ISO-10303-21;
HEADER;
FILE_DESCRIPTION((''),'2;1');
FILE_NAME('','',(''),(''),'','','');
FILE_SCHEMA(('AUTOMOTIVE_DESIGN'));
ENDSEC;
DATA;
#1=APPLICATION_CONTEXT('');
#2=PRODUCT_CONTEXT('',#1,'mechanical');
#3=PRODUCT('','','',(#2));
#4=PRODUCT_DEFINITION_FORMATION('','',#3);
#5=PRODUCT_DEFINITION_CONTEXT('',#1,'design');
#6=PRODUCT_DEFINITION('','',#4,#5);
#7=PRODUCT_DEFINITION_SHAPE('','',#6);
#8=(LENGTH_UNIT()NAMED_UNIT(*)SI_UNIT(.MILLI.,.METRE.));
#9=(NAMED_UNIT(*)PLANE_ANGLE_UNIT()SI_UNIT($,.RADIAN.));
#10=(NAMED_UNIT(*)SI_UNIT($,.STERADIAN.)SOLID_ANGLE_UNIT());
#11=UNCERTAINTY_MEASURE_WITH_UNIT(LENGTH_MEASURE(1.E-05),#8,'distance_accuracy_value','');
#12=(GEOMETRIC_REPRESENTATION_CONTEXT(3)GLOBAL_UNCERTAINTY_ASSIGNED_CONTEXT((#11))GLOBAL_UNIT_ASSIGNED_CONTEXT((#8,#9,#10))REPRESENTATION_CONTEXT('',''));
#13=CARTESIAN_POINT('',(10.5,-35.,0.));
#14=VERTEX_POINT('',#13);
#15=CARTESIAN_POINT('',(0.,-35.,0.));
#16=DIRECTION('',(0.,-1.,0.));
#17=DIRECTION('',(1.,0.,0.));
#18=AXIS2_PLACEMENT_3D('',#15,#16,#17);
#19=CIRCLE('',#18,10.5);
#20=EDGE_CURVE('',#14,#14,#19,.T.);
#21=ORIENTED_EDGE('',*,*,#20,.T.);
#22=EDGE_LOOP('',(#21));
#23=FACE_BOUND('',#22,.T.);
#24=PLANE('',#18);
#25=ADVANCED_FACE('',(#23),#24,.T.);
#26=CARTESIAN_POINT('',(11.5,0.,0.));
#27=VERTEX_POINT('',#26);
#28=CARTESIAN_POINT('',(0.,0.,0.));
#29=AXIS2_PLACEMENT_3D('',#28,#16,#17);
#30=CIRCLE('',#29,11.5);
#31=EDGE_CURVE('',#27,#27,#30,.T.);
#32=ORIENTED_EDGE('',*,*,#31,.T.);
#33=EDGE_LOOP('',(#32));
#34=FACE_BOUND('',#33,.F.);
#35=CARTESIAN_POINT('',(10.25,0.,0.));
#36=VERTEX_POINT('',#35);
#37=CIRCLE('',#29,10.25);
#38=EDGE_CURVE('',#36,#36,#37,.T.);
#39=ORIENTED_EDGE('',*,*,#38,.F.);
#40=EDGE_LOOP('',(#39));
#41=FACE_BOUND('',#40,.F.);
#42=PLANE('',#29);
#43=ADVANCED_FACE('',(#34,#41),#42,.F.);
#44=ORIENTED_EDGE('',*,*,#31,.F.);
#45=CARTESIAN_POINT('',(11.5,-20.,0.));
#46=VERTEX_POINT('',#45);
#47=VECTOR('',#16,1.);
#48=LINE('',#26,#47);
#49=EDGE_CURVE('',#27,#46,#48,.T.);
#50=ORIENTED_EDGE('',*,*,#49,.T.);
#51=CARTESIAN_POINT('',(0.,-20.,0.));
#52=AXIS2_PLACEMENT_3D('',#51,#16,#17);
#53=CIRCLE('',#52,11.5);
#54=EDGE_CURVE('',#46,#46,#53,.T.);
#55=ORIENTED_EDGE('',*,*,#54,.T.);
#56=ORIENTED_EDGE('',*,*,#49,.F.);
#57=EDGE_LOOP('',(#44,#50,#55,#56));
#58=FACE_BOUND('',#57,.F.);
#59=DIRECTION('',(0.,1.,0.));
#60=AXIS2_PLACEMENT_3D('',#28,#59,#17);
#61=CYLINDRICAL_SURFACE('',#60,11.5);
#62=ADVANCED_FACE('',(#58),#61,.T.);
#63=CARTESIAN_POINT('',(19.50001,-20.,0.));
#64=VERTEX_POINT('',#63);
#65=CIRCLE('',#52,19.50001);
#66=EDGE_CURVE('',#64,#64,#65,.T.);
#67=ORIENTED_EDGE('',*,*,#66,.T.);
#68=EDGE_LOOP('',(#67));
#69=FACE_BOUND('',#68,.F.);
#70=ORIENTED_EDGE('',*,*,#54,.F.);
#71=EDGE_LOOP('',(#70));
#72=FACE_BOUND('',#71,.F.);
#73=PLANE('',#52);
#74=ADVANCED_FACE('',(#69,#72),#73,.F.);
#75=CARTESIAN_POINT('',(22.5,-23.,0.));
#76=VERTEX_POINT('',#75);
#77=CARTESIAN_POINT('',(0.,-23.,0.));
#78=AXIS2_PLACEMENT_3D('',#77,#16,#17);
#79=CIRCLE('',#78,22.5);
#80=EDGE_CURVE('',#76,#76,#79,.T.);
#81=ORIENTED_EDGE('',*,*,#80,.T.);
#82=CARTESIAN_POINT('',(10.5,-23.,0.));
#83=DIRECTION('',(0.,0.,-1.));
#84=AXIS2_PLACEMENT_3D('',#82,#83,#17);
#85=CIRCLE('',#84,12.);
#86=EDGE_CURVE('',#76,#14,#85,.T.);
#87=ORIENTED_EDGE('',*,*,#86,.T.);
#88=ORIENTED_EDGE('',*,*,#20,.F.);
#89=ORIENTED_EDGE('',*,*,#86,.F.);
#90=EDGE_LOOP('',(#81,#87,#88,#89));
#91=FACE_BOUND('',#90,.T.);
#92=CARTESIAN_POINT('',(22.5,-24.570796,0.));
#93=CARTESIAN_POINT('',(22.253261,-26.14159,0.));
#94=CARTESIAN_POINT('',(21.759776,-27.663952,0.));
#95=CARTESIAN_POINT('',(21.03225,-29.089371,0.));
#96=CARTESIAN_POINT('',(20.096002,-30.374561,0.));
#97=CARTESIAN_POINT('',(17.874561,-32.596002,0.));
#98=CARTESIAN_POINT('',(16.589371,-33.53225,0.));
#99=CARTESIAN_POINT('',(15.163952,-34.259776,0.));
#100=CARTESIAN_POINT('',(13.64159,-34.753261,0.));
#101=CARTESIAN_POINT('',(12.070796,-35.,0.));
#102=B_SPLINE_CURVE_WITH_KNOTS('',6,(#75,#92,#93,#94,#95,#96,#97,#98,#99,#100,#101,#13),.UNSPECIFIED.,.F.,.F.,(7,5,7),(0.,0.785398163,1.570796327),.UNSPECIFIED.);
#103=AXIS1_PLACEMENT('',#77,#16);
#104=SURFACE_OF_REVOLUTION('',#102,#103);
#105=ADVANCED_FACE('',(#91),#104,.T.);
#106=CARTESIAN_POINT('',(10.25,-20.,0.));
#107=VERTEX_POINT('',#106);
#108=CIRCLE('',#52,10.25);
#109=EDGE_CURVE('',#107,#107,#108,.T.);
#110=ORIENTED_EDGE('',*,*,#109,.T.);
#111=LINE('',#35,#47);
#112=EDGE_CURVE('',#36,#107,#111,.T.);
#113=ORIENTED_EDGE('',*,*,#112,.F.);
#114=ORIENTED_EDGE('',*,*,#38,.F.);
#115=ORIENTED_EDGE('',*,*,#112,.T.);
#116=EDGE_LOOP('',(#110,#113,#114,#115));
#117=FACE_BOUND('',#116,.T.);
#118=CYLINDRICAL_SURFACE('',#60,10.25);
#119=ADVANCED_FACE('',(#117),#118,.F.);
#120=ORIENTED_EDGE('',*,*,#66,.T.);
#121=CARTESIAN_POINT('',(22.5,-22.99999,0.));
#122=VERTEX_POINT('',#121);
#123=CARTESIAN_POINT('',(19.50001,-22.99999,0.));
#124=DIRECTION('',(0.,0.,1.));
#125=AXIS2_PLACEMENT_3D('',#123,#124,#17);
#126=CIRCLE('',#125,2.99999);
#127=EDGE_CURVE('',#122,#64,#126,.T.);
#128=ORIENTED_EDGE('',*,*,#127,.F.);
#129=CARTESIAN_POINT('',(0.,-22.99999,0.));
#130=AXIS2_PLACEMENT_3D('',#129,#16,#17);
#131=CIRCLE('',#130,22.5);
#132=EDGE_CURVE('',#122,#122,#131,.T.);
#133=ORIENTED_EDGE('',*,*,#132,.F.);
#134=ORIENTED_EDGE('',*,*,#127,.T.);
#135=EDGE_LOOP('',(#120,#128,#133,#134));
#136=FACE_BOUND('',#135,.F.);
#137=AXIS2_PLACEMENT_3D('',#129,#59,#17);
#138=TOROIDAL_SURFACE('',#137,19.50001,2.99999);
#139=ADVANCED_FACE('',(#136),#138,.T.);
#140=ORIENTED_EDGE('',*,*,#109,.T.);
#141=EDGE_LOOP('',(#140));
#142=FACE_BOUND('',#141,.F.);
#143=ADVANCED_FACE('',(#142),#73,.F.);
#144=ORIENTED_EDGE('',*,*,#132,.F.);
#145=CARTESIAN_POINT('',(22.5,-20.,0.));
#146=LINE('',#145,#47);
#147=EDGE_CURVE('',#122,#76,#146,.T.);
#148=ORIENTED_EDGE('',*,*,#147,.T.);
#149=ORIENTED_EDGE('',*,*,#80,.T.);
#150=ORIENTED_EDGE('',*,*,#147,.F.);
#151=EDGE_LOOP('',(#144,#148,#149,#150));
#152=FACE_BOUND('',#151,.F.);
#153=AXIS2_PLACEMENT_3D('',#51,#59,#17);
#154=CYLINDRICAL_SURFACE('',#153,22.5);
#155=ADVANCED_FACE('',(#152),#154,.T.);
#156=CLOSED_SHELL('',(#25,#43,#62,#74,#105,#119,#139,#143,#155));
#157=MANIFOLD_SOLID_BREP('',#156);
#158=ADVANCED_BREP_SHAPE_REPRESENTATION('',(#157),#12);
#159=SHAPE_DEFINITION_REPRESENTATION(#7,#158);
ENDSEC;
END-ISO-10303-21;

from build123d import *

# Parameters (mm, degrees)
F0_R     = 11.5
F0_R_2   = 10.25
F1_DEPTH = 20
F2_R     = 22.5
F3_DEPTH = 15
F4_R     = 12
F5_R     = 2.99999


# Not quite as in the source:
# - a fillet or chamfer is up to 0.001 mm smaller than in the source, because OpenCascade refuses the exact size


with BuildPart() as f1:
    # F0 (on Front) → F1 (new body)
    with BuildSketch(Plane.XZ):
        Circle(F0_R)
        Circle(F0_R_2, mode=Mode.SUBTRACT)
    extrude(amount=F1_DEPTH)

    # F2 (on face) → F3 (join)
    with BuildSketch(Plane.XZ.offset(20)):
        Circle(F2_R)
    extrude(amount=F3_DEPTH)

    # F4
    f4_edges = [f1.edges().sort_by_distance(p)[0] for p in [
        (-22.5, -35, 0),
    ]]
    fillet(f4_edges, radius=F4_R)

    # F5 (radius 3 in the source; OpenCascade refuses exactly that, so slightly less here)
    f5_edges = [f1.edges().sort_by_distance(p)[0] for p in [
        (-10.5, -35, 0),
        (-22.5, -23, 0),
        (-22.5, -20, 0),
    ]]
    fillet(f5_edges, radius=F5_R)


solid = f1.part
